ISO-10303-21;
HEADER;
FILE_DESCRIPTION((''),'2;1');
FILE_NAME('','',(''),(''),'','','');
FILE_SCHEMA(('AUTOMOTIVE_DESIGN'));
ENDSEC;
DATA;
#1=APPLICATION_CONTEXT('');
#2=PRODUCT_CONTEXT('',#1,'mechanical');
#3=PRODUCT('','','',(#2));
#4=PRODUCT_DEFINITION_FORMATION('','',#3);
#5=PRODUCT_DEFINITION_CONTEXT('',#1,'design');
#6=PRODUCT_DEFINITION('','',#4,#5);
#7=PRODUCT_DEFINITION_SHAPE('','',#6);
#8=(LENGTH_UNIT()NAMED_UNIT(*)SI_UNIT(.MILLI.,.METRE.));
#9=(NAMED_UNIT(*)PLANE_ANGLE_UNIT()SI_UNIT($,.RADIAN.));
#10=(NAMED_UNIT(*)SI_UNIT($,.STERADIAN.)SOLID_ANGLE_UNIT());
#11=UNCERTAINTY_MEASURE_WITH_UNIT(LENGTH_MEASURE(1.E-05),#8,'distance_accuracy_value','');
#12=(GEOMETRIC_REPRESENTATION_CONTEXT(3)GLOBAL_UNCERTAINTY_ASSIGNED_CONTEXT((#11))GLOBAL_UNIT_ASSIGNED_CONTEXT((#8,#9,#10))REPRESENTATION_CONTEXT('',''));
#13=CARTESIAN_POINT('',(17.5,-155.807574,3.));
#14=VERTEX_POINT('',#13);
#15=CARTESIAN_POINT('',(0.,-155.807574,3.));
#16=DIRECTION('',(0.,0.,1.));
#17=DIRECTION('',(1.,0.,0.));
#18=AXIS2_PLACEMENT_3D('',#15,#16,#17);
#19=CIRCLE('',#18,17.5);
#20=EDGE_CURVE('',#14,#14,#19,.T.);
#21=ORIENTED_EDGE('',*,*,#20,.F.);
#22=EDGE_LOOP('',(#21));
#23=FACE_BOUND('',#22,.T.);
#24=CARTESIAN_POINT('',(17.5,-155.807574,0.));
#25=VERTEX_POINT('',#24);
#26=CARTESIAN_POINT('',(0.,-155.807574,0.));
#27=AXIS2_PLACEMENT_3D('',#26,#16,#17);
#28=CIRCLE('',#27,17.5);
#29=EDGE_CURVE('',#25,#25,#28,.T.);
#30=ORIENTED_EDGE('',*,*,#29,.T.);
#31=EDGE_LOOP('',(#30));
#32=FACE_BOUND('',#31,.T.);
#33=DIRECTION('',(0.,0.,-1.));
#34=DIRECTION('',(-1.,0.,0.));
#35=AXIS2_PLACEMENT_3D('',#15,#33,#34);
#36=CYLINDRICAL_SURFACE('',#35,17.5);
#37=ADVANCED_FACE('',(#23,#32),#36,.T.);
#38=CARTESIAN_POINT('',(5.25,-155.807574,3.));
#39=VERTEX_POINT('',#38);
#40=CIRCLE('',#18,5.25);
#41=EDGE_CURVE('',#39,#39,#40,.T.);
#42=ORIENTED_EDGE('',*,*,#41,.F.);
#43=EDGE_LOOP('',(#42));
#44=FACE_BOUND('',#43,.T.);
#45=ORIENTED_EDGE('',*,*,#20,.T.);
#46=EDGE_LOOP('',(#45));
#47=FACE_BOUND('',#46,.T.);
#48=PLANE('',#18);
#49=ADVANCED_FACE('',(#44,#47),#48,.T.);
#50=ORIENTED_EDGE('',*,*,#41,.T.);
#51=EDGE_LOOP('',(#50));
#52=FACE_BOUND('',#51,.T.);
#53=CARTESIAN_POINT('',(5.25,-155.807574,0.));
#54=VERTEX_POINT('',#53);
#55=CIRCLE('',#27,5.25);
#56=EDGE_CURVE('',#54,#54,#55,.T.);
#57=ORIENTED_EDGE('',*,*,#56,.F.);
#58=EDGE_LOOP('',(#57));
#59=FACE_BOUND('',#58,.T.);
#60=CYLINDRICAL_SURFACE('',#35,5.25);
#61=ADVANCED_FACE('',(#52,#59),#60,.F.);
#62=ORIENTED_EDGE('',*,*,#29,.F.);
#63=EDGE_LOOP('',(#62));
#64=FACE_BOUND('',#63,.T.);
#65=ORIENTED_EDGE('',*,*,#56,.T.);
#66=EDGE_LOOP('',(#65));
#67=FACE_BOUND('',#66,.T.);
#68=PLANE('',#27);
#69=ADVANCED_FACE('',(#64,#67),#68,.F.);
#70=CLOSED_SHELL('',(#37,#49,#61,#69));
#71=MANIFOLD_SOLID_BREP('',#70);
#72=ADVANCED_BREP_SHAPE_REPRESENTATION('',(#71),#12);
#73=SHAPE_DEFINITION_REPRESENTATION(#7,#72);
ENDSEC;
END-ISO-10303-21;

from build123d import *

# Parameters (mm, degrees)
SKETCH_1_R             = 17.5
SKETCH_1_R_2           = 5.25
SM_BASE_FLANGE_1_DEPTH = 3


# Sheet-metal steps are written as plain solids
with BuildPart() as part:
    # Sketch 1 → Базовая кромка1 (new body)
    with BuildSketch(Plane.XY):
        with Locations((0, -155.807573628)):
            Circle(SKETCH_1_R)
        with Locations((0, -155.807573628)):
            Circle(SKETCH_1_R_2, mode=Mode.SUBTRACT)
    extrude(amount=SM_BASE_FLANGE_1_DEPTH)


solid = part.part
